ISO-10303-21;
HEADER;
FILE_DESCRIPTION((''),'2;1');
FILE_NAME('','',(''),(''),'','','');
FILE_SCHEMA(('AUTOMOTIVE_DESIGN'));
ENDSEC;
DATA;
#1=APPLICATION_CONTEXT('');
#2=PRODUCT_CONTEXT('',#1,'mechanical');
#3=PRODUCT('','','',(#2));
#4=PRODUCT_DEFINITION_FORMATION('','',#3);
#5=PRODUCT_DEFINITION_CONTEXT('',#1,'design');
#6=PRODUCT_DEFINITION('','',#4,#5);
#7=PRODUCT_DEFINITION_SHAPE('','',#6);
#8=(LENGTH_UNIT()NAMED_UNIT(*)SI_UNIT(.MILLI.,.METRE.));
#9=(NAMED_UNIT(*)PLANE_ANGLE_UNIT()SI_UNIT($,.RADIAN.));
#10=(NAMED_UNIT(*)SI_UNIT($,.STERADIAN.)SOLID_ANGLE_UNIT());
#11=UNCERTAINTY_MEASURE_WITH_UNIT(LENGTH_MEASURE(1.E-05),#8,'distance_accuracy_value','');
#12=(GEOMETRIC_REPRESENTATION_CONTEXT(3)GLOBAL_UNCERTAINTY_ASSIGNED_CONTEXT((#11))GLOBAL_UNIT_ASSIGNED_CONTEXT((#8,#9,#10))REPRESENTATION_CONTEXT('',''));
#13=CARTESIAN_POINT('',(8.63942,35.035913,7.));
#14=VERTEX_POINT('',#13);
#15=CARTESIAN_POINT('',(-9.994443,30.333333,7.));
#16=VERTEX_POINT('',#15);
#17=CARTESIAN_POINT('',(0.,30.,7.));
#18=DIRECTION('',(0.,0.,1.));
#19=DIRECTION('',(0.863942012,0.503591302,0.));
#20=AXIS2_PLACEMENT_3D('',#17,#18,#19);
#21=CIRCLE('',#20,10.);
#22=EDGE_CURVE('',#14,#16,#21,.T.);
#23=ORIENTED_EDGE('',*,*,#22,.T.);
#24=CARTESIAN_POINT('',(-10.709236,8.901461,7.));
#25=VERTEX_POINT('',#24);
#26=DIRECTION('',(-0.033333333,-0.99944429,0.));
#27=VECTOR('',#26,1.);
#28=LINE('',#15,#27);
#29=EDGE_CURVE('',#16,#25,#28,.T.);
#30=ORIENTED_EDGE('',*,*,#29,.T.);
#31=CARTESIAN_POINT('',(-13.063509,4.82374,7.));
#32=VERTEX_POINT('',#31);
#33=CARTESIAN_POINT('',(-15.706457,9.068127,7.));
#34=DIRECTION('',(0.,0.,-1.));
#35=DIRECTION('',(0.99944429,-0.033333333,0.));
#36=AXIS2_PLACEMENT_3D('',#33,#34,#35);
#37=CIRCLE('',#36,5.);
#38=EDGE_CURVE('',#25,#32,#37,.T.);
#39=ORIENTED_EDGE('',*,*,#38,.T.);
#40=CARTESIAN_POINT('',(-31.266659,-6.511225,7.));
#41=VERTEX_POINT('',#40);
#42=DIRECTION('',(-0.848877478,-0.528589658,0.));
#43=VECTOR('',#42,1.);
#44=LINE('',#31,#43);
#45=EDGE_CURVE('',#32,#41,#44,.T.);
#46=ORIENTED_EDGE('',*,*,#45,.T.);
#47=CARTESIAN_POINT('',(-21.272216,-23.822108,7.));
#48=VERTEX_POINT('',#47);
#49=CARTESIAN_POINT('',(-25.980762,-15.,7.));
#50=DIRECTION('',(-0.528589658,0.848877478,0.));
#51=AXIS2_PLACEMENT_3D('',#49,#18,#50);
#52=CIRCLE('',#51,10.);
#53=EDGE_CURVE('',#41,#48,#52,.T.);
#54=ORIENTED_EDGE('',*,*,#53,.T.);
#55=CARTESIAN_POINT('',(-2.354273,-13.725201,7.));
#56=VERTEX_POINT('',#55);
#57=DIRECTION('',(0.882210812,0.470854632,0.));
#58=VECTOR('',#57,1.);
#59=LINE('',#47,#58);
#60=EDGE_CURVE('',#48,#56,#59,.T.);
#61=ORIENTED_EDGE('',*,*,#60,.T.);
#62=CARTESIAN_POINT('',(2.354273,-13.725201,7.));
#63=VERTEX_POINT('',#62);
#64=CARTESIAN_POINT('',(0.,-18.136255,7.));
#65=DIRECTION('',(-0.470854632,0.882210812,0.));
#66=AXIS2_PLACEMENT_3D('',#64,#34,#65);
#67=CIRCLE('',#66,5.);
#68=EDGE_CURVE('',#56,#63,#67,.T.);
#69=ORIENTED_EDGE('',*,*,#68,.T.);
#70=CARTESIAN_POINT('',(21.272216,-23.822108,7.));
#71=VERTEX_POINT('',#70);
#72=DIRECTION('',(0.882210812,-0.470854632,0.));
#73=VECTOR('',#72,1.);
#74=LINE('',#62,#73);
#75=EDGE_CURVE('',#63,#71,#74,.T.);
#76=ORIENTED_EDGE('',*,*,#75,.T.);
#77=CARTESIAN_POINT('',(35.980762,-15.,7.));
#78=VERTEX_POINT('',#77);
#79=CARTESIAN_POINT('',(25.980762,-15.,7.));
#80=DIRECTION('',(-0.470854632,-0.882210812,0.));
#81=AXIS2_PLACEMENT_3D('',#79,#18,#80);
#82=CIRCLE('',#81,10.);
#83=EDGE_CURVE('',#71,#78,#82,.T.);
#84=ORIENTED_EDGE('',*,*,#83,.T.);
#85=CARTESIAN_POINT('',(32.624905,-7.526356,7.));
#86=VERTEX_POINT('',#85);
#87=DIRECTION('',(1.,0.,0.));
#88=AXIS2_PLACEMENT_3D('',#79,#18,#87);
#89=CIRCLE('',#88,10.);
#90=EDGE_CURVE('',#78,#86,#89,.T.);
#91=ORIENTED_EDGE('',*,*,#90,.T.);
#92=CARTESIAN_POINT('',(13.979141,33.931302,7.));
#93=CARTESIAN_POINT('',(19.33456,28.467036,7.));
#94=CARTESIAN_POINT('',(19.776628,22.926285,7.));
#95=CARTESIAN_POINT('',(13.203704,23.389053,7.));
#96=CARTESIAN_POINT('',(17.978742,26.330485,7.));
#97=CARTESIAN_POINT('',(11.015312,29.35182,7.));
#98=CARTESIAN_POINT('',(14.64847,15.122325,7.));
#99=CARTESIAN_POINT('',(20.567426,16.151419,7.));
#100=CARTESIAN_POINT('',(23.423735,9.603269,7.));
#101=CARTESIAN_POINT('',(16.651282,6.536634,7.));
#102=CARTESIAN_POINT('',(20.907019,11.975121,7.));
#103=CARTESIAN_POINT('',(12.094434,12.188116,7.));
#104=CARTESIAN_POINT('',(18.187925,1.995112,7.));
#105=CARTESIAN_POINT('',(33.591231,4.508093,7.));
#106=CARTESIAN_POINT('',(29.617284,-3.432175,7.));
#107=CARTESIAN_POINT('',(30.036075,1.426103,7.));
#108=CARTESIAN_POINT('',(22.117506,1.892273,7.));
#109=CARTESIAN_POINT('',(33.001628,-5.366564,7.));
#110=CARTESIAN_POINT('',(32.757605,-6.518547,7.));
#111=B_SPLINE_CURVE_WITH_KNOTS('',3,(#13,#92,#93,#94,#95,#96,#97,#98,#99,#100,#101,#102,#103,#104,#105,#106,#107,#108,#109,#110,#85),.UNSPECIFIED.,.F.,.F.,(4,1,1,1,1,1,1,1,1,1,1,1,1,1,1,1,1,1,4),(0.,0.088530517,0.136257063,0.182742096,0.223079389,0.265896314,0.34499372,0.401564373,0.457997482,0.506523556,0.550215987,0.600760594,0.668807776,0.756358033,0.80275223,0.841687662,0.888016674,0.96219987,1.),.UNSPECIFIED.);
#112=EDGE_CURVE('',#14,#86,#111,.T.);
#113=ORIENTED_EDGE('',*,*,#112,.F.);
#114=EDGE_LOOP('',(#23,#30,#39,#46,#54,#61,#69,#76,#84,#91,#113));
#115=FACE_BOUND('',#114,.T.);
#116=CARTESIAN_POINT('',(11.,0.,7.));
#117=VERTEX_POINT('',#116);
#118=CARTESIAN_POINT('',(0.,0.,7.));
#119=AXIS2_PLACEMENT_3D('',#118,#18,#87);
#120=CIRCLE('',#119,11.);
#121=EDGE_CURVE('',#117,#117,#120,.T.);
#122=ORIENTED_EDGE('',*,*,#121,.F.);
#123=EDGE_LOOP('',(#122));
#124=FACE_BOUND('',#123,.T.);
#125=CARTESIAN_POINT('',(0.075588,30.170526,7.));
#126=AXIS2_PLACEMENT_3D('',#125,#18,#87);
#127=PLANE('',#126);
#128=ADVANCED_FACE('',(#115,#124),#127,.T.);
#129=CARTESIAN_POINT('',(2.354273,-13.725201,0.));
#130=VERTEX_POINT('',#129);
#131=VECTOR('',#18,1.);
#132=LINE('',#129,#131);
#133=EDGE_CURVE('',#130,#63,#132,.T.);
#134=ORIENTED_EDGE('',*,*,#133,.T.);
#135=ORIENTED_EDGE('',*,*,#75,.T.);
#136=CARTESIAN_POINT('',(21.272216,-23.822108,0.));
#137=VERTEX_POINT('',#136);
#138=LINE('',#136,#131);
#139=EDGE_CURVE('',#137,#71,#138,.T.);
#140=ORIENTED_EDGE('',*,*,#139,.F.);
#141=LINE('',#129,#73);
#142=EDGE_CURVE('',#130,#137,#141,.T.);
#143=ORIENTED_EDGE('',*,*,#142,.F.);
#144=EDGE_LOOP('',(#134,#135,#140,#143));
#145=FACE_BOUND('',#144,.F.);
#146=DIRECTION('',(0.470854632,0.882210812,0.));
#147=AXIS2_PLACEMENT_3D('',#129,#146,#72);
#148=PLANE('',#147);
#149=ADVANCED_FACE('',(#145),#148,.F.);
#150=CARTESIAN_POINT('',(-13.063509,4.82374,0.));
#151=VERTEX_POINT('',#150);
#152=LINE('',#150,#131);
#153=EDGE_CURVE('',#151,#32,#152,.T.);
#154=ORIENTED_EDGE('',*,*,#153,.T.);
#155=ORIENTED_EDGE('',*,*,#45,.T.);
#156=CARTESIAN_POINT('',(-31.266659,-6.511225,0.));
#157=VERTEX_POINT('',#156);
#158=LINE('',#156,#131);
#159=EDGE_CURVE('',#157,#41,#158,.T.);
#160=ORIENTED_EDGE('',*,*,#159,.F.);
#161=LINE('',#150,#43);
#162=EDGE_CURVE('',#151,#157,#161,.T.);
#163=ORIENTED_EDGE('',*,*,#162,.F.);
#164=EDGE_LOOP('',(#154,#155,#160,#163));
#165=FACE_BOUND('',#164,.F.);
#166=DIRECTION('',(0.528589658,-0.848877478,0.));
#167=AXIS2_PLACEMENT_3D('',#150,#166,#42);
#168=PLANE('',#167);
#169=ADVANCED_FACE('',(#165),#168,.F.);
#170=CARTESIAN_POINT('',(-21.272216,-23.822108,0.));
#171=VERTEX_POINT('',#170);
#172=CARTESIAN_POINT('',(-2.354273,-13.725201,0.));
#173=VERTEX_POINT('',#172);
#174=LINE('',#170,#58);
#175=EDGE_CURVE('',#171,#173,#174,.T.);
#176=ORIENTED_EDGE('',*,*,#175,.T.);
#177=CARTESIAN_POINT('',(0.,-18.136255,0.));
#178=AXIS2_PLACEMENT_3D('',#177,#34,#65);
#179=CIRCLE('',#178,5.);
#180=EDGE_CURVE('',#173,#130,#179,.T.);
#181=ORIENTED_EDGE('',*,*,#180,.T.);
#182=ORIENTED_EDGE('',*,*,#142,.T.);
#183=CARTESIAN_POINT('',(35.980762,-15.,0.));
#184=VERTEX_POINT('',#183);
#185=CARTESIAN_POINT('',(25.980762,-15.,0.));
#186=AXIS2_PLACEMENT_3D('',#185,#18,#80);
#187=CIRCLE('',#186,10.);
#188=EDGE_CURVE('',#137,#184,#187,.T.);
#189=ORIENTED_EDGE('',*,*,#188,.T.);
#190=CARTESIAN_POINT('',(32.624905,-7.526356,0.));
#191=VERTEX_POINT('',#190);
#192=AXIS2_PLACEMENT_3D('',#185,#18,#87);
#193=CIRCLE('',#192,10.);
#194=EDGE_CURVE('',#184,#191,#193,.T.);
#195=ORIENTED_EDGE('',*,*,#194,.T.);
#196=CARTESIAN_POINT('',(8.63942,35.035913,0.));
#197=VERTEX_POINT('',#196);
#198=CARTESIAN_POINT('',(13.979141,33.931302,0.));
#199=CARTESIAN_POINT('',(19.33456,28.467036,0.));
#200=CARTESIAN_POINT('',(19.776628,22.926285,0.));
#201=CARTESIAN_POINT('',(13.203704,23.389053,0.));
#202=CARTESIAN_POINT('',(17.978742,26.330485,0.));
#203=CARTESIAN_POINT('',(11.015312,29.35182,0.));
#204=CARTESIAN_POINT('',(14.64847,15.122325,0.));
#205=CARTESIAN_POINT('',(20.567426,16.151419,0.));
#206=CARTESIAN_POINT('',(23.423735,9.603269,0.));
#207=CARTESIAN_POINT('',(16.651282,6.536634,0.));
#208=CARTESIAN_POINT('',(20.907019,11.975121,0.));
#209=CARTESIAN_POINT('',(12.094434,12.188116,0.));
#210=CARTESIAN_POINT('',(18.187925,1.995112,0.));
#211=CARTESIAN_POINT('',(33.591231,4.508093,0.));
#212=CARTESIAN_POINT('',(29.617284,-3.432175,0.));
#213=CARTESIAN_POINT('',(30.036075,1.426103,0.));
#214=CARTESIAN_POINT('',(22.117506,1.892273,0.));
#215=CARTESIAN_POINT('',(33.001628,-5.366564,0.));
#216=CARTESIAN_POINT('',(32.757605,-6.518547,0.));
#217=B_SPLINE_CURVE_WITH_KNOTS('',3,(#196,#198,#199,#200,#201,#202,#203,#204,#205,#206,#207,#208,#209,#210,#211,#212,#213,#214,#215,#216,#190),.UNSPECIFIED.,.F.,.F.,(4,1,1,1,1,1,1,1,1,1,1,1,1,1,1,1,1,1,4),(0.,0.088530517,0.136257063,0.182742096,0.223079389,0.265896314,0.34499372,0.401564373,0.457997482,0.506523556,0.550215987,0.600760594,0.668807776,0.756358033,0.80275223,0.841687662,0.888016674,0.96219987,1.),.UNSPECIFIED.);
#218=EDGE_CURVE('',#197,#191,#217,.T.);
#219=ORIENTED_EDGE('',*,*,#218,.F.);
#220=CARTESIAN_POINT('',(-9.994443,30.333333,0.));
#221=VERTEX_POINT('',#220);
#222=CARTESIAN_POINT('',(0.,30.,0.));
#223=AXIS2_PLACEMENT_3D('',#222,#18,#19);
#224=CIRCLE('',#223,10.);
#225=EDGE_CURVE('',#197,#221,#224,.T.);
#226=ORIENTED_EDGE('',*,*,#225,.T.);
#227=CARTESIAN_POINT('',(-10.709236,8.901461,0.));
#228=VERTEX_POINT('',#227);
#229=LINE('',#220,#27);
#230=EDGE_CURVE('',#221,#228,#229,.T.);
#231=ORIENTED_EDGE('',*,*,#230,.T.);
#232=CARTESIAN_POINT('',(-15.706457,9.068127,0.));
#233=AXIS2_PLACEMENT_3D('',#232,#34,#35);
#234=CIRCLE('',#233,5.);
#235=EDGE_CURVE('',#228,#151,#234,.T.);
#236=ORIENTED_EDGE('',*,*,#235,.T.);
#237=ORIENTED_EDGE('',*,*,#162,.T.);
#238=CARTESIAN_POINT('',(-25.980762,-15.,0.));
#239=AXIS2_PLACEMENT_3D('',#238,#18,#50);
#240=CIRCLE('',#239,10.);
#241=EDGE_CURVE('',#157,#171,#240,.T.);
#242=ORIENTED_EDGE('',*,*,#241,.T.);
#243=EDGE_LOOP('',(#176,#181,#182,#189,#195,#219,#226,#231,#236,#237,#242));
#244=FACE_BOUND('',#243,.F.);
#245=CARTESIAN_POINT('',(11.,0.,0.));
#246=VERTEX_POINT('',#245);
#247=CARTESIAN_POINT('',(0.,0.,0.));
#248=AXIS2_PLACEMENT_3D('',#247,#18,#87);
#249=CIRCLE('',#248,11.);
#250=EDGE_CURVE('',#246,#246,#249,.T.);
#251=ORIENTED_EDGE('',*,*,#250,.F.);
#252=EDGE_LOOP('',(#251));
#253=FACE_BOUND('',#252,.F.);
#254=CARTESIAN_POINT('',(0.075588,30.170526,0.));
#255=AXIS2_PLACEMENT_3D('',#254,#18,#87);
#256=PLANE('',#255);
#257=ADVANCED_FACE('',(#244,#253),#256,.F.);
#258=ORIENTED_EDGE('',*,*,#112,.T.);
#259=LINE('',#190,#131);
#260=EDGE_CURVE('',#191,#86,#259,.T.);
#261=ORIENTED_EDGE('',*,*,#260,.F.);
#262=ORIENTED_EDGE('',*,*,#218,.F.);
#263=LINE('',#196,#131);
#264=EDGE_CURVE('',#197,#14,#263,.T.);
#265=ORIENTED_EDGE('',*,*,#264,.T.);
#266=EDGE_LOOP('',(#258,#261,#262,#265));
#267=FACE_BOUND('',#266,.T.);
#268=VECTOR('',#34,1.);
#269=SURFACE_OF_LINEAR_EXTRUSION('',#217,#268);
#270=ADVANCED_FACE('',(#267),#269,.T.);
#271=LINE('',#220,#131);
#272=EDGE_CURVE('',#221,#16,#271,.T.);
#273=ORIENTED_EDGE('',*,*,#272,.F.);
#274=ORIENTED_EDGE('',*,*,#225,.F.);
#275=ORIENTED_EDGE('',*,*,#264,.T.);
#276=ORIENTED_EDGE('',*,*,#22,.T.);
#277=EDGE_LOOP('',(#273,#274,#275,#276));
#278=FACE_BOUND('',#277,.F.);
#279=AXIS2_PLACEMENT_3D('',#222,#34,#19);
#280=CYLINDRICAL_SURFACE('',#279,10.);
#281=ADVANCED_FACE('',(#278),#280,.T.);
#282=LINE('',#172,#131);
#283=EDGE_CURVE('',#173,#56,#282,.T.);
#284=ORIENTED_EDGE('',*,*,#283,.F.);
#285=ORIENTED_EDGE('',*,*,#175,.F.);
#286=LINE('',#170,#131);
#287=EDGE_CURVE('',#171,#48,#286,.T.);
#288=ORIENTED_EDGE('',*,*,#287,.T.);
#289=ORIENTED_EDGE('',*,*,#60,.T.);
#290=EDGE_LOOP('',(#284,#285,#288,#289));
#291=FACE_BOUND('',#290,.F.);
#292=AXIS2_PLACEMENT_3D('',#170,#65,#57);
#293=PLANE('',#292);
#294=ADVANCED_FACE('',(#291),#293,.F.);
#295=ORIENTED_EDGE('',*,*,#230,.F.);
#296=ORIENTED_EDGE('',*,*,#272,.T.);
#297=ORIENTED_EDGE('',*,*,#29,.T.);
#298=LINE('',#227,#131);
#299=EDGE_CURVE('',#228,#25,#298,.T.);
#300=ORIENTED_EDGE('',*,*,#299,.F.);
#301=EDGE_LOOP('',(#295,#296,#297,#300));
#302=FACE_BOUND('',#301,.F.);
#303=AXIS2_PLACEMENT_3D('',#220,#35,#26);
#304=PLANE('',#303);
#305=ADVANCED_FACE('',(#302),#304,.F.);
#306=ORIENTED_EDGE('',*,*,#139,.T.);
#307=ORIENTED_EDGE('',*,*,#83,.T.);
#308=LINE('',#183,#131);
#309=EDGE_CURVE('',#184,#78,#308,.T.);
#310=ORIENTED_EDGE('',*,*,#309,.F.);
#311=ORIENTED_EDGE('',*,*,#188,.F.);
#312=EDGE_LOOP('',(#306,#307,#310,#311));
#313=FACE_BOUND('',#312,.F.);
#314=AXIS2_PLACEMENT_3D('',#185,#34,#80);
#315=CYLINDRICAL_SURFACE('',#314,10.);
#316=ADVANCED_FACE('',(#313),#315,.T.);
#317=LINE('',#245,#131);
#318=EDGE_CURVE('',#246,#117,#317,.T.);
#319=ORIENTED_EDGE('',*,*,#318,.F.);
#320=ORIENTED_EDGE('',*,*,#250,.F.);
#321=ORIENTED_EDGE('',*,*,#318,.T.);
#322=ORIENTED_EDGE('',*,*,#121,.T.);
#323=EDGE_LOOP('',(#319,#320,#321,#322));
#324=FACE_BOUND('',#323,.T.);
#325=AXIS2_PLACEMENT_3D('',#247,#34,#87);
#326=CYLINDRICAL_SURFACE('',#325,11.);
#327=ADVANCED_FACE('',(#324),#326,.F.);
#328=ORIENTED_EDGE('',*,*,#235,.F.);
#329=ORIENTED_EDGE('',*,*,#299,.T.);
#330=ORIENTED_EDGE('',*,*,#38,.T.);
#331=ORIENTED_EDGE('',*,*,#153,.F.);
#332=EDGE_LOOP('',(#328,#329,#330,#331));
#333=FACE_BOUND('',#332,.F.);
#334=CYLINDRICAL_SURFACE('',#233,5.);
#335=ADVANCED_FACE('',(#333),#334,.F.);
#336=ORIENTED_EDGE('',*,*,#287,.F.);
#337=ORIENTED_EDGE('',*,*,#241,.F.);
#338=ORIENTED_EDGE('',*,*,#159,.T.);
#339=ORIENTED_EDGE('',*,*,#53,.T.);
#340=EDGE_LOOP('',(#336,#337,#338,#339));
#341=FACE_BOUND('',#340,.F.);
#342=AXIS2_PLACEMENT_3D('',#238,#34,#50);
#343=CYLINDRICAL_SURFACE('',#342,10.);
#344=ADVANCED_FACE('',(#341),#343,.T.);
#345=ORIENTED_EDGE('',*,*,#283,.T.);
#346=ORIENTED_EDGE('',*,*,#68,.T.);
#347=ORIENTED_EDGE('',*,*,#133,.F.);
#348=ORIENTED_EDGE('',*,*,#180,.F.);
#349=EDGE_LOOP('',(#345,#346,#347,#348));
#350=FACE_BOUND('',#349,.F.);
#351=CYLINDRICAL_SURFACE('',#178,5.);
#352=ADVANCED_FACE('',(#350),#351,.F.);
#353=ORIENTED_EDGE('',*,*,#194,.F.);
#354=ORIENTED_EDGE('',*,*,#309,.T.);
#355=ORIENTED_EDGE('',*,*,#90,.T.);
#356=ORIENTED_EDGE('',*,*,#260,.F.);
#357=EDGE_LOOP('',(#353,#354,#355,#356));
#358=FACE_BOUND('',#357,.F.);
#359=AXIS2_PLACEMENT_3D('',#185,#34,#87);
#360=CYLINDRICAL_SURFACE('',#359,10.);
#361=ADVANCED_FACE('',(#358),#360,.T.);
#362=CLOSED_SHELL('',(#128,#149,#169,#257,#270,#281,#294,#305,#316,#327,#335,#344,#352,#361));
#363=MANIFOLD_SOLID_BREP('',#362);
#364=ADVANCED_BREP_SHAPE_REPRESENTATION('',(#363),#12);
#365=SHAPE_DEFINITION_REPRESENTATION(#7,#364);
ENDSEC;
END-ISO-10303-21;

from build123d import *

# Parameters (mm, degrees)
F0_R     = 11
F1_DEPTH = 7


# Not quite as in the source:
# - a feature names something its author has since deleted; it is built from what else it names


with BuildPart() as f1:
    # F0 (on Top) → F1 (new body)
    with BuildSketch(Plane.XY):
        with BuildLine():
            ThreePointArc((-9.9944429004, 30.3333333333), (-0.1666898261, 20.0013893714), (10, 30))
            ThreePointArc((10, 30), (9.9986106286, 30.1666898261), (9.9944429004, 30.3333333333))
            ThreePointArc((9.9944429004, 30.3333333333), (9.6090466084, 32.7687945531), (8.6394201237, 35.0359130181))
            ThreePointArc((8.6394201237, 35.0359130181), (-2.4469543527, 39.6959999173), (-9.9944429004, 30.3333333333))
        make_face()
        with BuildLine():
            ThreePointArc((9.9944429004, 30.3333333333), (9.9986106286, 30.1666898261), (10, 30))
            ThreePointArc((10, 30), (-0.1666898261, 20.0013893714), (-9.9944429004, 30.3333333333))
            Line((-9.9944429004, 30.3333333333), (-10.7092358725, 8.9014606966))
            ThreePointArc((-10.7092358725, 8.9014606966), (-11.3763303038, 6.5681273633), (-13.0635090303, 4.8237399724))
            Line((-13.0635090303, 4.8237399724), (-31.2666586983, -6.5112252183))
            ThreePointArc((-31.2666586983, -6.5112252183), (-21.1258144232, -6.2576042801), (-15.9807621135, -15))
            ThreePointArc((-15.9807621135, -15), (-17.4050562197, -20.1436629382), (-21.2722157979, -23.8221081151))
            Line((-21.2722157979, -23.8221081151), (-2.3542731578, -13.725200669))
            ThreePointArc((-2.3542731578, -13.725200669), (0, -13.1362547266), (2.3542731578, -13.725200669))
            Line((2.3542731578, -13.725200669), (21.2722157979, -23.8221081151))
            ThreePointArc((21.2722157979, -23.8221081151), (17.3205080757, -10), (31.2666586983, -6.5112252183))
            Line((31.2666586983, -6.5112252183), (13.0635090303, 4.8237399724))
            ThreePointArc((13.0635090303, 4.8237399724), (11.3763303038, 6.5681273633), (10.7092358725, 8.9014606966))
            Line((10.7092358725, 8.9014606966), (9.9944429004, 30.3333333333))
        make_face()
        Circle(F0_R, mode=Mode.SUBTRACT)
        with BuildLine():
            ThreePointArc((8.6394201237, 35.0359130181), (9.6090466084, 32.7687945531), (9.9944429004, 30.3333333333))
            Line((9.9944429004, 30.3333333333), (10.7092358725, 8.9014606966))
            ThreePointArc((10.7092358725, 8.9014606966), (11.3763303038, 6.5681273633), (13.0635090303, 4.8237399724))
            Line((13.0635090303, 4.8237399724), (31.2666586983, -6.5112252183))
            ThreePointArc((31.2666586983, -6.5112252183), (31.9673374552, -6.9899490839), (32.6249052512, -7.5263555098))
            add(Edge.make_bspline(
                [(8.6394201237, 35.0359130181), (13.9791405245, 33.9313022187), (19.3345604365, 28.4670356067), (19.7766282836, 22.9262849119), (13.203703788, 23.3890528516), (17.9787416524, 26.3304847895), (11.0153121305, 29.3518202799), (14.6484703321, 15.1223253788), (20.567425968, 16.1514189079), (23.4237352348, 9.6032691823), (16.6512822907, 6.5366339201), (20.9070192695, 11.9751211188), (12.0944343738, 12.1881164979), (18.1879248471, 1.9951119769), (33.5912305893, 4.508093074), (29.6172838681, -3.4321747922), (30.0360748201, 1.4261029066), (22.1175057769, 1.8922728608), (33.001628255, -5.3665637563), (32.7576051866, -6.5185471211), (32.6249052512, -7.5263555098)],
                knots=[0, 0, 0, 0, 0.0885305165, 0.1362570633, 0.1827420963, 0.2230793888, 0.2658963137, 0.3449937205, 0.4015643726, 0.4579974818, 0.5065235559, 0.5502159866, 0.6007605945, 0.6688077756, 0.7563580334, 0.8027522302, 0.8416876616, 0.8880166736, 0.9621998701, 1, 1, 1, 1], degree=3))
        make_face()
        with BuildLine():
            ThreePointArc((35.9807621135, -15), (35.1033009974, -10.9037475283), (32.6249052512, -7.5263555098))
            ThreePointArc((32.6249052512, -7.5263555098), (31.9673374552, -6.9899490839), (31.2666586983, -6.5112252183))
            ThreePointArc((31.2666586983, -6.5112252183), (17.3205080757, -10), (21.2722157979, -23.8221081151))
            ThreePointArc((21.2722157979, -23.8221081151), (31.1244250518, -23.5757058939), (35.9807621135, -15))
        make_face()
        with BuildLine():
            ThreePointArc((-15.9807621135, -15), (-21.1258144232, -6.2576042801), (-31.2666586983, -6.5112252183))
            ThreePointArc((-31.2666586983, -6.5112252183), (-34.6410161514, -20), (-21.2722157979, -23.8221081151))
            ThreePointArc((-21.2722157979, -23.8221081151), (-17.4050562197, -20.1436629382), (-15.9807621135, -15))
        make_face()
    extrude(amount=F1_DEPTH)


solid = f1.part
